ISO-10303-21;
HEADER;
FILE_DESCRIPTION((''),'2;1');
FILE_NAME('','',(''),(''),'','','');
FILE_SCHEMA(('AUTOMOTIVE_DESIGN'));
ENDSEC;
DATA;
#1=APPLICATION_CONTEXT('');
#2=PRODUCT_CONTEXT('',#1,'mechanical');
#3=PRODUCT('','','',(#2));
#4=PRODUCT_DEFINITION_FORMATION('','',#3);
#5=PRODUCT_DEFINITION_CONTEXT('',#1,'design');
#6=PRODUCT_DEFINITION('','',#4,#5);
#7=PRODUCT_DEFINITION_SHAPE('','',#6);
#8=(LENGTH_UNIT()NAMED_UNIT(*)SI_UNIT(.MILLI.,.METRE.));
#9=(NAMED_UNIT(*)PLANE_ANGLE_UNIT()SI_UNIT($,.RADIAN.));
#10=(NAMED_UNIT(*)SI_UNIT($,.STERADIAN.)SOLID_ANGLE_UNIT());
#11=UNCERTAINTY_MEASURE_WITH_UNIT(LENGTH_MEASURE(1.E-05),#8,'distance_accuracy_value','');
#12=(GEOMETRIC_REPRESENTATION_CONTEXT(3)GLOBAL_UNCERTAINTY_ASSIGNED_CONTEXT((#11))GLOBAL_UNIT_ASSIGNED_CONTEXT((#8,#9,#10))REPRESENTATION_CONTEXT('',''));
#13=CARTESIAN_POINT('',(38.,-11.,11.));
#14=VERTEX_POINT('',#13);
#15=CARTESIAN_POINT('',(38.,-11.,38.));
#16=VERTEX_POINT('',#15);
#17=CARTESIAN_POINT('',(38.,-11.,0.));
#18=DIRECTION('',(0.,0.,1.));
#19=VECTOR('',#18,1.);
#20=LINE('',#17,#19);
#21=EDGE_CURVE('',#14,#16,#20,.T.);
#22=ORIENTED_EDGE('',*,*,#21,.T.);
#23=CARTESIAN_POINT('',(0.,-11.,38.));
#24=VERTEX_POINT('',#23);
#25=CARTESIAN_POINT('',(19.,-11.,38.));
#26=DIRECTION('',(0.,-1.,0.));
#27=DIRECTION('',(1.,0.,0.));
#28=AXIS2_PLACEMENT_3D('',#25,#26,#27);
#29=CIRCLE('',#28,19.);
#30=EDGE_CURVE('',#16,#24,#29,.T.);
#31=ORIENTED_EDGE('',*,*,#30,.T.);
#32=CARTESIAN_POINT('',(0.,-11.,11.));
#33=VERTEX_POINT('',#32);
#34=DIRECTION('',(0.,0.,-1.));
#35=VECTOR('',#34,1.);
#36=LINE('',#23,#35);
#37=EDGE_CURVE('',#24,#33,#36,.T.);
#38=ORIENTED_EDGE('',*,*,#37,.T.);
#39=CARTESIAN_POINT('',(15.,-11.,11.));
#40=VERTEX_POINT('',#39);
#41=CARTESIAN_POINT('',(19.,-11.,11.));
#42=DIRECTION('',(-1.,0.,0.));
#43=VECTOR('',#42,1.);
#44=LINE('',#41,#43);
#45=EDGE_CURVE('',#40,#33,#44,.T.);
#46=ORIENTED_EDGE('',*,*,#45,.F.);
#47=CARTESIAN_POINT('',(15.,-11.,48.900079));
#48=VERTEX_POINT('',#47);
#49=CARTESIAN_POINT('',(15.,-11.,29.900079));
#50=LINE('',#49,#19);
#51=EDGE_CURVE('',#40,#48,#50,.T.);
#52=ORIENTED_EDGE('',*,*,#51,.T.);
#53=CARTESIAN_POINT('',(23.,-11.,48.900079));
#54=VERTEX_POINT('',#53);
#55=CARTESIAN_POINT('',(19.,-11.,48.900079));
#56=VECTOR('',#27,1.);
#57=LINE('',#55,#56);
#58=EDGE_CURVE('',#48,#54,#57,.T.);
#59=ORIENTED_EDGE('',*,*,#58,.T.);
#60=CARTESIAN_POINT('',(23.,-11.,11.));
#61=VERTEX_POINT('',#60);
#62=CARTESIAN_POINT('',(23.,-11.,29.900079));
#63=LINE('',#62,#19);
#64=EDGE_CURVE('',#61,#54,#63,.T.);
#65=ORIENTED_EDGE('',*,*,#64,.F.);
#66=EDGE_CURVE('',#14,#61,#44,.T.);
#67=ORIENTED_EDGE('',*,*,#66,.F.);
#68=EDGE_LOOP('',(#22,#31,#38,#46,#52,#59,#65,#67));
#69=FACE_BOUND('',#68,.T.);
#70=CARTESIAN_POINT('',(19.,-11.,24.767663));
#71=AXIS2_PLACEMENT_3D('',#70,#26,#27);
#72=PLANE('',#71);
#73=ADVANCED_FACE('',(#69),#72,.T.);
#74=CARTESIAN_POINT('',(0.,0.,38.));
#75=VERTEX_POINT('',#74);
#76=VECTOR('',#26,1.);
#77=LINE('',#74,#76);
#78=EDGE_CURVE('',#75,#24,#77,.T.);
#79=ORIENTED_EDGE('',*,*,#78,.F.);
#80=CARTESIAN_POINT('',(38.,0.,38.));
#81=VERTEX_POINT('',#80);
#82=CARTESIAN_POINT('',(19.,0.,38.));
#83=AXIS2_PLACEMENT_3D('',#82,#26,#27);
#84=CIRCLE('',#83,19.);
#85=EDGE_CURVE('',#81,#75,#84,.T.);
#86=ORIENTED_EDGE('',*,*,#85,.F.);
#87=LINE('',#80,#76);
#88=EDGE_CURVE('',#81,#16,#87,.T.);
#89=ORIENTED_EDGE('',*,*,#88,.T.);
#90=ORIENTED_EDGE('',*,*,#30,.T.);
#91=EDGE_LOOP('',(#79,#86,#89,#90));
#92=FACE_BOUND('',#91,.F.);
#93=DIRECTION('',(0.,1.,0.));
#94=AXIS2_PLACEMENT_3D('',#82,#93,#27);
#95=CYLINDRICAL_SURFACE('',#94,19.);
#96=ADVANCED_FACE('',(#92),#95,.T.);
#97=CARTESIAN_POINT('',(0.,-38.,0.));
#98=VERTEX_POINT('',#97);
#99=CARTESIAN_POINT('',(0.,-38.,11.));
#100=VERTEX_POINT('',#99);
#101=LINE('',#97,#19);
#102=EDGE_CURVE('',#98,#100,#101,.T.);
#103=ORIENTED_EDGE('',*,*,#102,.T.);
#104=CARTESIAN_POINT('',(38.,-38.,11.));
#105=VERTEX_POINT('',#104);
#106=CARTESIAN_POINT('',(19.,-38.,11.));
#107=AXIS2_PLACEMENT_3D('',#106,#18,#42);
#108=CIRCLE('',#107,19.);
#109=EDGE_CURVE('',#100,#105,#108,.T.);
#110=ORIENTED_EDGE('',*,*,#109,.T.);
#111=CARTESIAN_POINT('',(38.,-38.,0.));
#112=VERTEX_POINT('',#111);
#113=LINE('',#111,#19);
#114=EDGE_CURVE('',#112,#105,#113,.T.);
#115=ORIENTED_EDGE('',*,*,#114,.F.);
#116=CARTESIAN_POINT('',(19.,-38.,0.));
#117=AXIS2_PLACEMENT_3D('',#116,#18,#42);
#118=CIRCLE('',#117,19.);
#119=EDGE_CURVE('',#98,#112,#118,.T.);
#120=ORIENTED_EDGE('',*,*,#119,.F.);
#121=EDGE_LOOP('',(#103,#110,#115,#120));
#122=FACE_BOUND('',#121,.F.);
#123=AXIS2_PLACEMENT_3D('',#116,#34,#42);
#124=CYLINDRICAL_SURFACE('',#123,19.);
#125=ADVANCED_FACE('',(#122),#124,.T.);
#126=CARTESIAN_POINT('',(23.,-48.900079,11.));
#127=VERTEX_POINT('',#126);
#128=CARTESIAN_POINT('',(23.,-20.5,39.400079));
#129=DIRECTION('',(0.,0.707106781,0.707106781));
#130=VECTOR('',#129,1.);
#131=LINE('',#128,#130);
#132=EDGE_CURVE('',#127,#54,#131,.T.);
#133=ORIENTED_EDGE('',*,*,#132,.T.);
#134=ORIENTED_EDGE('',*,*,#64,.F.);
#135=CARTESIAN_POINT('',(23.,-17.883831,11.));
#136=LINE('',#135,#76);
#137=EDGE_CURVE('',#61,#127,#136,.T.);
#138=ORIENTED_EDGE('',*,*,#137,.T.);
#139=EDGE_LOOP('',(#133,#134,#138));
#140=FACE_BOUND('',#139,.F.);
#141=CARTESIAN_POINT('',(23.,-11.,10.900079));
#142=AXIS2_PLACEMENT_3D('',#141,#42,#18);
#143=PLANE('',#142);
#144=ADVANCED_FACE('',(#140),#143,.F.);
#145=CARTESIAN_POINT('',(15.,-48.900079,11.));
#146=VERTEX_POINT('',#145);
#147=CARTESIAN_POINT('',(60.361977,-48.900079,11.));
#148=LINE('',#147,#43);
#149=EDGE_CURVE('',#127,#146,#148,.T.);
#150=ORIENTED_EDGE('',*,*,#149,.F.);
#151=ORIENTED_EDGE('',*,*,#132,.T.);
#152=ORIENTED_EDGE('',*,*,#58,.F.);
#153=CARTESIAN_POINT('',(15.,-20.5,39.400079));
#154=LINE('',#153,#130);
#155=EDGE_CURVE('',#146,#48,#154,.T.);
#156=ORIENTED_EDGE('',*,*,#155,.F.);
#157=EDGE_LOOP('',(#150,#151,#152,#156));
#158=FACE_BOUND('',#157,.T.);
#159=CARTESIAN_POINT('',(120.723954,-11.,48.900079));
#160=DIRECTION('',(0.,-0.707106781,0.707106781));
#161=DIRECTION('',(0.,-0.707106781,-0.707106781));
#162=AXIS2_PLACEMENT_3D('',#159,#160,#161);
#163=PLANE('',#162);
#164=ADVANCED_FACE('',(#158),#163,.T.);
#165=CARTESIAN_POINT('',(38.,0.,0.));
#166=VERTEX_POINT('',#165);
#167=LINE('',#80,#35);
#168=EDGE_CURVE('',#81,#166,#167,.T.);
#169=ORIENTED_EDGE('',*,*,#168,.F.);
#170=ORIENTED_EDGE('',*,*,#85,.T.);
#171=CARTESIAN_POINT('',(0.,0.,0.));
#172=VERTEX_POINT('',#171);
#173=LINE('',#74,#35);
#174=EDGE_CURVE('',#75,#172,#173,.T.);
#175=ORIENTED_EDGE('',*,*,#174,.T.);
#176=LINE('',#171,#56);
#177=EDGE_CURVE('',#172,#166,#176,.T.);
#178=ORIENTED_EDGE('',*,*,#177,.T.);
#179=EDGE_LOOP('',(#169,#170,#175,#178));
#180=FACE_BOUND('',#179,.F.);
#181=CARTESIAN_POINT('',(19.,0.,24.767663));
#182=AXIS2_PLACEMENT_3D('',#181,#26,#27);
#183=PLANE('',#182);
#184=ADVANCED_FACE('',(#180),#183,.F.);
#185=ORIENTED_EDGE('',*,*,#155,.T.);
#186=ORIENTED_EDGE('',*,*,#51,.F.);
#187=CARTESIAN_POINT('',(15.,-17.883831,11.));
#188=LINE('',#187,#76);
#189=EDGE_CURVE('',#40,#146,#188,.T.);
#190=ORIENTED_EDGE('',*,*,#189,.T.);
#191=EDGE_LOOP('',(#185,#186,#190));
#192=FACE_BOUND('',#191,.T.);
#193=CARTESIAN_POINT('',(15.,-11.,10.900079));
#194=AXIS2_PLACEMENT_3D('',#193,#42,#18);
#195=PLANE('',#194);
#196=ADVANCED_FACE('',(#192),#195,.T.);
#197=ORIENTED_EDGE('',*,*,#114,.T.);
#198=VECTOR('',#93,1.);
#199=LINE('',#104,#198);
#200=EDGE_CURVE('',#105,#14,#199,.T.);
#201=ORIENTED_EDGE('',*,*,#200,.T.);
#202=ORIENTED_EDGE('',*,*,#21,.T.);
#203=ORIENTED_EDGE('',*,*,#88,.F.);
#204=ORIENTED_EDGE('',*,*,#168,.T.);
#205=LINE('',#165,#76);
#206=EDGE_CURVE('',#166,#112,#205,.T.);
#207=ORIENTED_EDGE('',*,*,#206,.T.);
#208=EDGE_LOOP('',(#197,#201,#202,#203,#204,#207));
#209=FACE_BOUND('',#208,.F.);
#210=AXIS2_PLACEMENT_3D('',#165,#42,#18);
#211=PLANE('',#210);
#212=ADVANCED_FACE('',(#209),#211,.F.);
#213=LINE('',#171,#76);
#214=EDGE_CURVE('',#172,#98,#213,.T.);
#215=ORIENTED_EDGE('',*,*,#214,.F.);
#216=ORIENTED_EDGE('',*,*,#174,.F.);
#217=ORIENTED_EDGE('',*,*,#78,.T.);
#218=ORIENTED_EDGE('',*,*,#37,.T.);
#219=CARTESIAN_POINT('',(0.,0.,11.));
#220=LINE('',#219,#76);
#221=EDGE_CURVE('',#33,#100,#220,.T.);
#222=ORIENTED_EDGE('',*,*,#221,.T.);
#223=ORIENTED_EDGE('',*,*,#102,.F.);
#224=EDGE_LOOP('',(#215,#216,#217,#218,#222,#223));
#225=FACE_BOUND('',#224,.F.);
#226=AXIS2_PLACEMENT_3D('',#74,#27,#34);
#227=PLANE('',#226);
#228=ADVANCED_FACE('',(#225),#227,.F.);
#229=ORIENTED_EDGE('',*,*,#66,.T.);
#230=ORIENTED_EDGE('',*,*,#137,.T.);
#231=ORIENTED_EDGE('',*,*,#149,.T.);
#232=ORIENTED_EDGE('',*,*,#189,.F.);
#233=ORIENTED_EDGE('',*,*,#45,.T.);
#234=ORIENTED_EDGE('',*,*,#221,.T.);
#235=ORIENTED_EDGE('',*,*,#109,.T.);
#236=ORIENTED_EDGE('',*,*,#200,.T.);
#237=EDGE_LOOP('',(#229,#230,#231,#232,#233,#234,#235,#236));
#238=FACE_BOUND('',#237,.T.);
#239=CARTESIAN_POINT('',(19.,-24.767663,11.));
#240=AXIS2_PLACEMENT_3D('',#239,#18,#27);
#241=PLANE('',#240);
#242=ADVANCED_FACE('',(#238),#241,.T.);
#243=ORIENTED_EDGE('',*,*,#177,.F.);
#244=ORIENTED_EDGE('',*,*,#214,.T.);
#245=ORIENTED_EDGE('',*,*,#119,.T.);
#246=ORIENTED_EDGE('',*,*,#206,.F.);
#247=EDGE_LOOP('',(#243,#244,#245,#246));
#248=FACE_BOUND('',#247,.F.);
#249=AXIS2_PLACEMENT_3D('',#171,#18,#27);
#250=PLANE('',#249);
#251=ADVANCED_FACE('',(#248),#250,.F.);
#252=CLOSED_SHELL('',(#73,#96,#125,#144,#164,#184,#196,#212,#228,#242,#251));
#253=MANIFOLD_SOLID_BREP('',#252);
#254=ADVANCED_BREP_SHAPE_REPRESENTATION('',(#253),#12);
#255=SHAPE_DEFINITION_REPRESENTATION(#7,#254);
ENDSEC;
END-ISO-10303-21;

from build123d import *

# Parameters (mm, degrees)
F1_DEPTH    = 11
F3_DEPTH    = 11
F5_W        = 8
F5_H        = 38
F6_DEPTH    = 38
F7_T4_DEPTH = 203.4479070854


# Not quite as in the source:
# - a fillet or chamfer that OpenCascade refuses, or shapes differently, is made with other operations: its cross-section is extruded or revolved along the edge and cut away or added


with BuildPart() as f1:
    # F0 (on Front) → F1 (new body)
    with BuildSketch(Plane.XZ):
        with BuildLine():
            Line((0, 38), (0, 0))
            Line((0, 0), (38, 0))
            Line((38, 0), (38, 38))
            ThreePointArc((38, 38), (19, 57), (0, 38))
        make_face()
    extrude(amount=F1_DEPTH)

    # F2 (on Top) → F3 (join)
    with BuildSketch(Plane.XY):
        with BuildLine():
            Line((38, 0), (0, 0))
            Line((0, 0), (0, -38))
            ThreePointArc((0, -38), (19, -57), (38, -38))
            Line((38, -38), (38, 0))
        make_face()
    extrude(amount=F3_DEPTH)

    # F5 (on offset) → F6 (join)
    with BuildSketch(Plane.XZ.offset(11)):
        with Locations((19, 29.9000790417)):
            Rectangle(F5_W, F5_H)
    extrude(amount=F6_DEPTH)

    # F7: chamfer of 38 on 1 edges, made by hand


with BuildPart() as f7_tool2:
    # F7_s3 → F7_t4 (new body)
    with BuildSketch(Plane.YZ.offset(120.7239535427)):
        Polygon((-11, 48.9000790417), (-49, 10.9000790417), (-49, 48.9000790417), align=None)
    extrude(amount=-F7_T4_DEPTH)

    split(bisect_by=Plane.XZ.offset(11), keep=Keep.TOP)

    split(bisect_by=Plane.XY.offset(11), keep=Keep.TOP)


with BuildPart() as f1_1:
    add(f1.part)

    # F7_t1: cut F7_tool2
    add(f7_tool2.part, mode=Mode.SUBTRACT)


solid = f1_1.part
